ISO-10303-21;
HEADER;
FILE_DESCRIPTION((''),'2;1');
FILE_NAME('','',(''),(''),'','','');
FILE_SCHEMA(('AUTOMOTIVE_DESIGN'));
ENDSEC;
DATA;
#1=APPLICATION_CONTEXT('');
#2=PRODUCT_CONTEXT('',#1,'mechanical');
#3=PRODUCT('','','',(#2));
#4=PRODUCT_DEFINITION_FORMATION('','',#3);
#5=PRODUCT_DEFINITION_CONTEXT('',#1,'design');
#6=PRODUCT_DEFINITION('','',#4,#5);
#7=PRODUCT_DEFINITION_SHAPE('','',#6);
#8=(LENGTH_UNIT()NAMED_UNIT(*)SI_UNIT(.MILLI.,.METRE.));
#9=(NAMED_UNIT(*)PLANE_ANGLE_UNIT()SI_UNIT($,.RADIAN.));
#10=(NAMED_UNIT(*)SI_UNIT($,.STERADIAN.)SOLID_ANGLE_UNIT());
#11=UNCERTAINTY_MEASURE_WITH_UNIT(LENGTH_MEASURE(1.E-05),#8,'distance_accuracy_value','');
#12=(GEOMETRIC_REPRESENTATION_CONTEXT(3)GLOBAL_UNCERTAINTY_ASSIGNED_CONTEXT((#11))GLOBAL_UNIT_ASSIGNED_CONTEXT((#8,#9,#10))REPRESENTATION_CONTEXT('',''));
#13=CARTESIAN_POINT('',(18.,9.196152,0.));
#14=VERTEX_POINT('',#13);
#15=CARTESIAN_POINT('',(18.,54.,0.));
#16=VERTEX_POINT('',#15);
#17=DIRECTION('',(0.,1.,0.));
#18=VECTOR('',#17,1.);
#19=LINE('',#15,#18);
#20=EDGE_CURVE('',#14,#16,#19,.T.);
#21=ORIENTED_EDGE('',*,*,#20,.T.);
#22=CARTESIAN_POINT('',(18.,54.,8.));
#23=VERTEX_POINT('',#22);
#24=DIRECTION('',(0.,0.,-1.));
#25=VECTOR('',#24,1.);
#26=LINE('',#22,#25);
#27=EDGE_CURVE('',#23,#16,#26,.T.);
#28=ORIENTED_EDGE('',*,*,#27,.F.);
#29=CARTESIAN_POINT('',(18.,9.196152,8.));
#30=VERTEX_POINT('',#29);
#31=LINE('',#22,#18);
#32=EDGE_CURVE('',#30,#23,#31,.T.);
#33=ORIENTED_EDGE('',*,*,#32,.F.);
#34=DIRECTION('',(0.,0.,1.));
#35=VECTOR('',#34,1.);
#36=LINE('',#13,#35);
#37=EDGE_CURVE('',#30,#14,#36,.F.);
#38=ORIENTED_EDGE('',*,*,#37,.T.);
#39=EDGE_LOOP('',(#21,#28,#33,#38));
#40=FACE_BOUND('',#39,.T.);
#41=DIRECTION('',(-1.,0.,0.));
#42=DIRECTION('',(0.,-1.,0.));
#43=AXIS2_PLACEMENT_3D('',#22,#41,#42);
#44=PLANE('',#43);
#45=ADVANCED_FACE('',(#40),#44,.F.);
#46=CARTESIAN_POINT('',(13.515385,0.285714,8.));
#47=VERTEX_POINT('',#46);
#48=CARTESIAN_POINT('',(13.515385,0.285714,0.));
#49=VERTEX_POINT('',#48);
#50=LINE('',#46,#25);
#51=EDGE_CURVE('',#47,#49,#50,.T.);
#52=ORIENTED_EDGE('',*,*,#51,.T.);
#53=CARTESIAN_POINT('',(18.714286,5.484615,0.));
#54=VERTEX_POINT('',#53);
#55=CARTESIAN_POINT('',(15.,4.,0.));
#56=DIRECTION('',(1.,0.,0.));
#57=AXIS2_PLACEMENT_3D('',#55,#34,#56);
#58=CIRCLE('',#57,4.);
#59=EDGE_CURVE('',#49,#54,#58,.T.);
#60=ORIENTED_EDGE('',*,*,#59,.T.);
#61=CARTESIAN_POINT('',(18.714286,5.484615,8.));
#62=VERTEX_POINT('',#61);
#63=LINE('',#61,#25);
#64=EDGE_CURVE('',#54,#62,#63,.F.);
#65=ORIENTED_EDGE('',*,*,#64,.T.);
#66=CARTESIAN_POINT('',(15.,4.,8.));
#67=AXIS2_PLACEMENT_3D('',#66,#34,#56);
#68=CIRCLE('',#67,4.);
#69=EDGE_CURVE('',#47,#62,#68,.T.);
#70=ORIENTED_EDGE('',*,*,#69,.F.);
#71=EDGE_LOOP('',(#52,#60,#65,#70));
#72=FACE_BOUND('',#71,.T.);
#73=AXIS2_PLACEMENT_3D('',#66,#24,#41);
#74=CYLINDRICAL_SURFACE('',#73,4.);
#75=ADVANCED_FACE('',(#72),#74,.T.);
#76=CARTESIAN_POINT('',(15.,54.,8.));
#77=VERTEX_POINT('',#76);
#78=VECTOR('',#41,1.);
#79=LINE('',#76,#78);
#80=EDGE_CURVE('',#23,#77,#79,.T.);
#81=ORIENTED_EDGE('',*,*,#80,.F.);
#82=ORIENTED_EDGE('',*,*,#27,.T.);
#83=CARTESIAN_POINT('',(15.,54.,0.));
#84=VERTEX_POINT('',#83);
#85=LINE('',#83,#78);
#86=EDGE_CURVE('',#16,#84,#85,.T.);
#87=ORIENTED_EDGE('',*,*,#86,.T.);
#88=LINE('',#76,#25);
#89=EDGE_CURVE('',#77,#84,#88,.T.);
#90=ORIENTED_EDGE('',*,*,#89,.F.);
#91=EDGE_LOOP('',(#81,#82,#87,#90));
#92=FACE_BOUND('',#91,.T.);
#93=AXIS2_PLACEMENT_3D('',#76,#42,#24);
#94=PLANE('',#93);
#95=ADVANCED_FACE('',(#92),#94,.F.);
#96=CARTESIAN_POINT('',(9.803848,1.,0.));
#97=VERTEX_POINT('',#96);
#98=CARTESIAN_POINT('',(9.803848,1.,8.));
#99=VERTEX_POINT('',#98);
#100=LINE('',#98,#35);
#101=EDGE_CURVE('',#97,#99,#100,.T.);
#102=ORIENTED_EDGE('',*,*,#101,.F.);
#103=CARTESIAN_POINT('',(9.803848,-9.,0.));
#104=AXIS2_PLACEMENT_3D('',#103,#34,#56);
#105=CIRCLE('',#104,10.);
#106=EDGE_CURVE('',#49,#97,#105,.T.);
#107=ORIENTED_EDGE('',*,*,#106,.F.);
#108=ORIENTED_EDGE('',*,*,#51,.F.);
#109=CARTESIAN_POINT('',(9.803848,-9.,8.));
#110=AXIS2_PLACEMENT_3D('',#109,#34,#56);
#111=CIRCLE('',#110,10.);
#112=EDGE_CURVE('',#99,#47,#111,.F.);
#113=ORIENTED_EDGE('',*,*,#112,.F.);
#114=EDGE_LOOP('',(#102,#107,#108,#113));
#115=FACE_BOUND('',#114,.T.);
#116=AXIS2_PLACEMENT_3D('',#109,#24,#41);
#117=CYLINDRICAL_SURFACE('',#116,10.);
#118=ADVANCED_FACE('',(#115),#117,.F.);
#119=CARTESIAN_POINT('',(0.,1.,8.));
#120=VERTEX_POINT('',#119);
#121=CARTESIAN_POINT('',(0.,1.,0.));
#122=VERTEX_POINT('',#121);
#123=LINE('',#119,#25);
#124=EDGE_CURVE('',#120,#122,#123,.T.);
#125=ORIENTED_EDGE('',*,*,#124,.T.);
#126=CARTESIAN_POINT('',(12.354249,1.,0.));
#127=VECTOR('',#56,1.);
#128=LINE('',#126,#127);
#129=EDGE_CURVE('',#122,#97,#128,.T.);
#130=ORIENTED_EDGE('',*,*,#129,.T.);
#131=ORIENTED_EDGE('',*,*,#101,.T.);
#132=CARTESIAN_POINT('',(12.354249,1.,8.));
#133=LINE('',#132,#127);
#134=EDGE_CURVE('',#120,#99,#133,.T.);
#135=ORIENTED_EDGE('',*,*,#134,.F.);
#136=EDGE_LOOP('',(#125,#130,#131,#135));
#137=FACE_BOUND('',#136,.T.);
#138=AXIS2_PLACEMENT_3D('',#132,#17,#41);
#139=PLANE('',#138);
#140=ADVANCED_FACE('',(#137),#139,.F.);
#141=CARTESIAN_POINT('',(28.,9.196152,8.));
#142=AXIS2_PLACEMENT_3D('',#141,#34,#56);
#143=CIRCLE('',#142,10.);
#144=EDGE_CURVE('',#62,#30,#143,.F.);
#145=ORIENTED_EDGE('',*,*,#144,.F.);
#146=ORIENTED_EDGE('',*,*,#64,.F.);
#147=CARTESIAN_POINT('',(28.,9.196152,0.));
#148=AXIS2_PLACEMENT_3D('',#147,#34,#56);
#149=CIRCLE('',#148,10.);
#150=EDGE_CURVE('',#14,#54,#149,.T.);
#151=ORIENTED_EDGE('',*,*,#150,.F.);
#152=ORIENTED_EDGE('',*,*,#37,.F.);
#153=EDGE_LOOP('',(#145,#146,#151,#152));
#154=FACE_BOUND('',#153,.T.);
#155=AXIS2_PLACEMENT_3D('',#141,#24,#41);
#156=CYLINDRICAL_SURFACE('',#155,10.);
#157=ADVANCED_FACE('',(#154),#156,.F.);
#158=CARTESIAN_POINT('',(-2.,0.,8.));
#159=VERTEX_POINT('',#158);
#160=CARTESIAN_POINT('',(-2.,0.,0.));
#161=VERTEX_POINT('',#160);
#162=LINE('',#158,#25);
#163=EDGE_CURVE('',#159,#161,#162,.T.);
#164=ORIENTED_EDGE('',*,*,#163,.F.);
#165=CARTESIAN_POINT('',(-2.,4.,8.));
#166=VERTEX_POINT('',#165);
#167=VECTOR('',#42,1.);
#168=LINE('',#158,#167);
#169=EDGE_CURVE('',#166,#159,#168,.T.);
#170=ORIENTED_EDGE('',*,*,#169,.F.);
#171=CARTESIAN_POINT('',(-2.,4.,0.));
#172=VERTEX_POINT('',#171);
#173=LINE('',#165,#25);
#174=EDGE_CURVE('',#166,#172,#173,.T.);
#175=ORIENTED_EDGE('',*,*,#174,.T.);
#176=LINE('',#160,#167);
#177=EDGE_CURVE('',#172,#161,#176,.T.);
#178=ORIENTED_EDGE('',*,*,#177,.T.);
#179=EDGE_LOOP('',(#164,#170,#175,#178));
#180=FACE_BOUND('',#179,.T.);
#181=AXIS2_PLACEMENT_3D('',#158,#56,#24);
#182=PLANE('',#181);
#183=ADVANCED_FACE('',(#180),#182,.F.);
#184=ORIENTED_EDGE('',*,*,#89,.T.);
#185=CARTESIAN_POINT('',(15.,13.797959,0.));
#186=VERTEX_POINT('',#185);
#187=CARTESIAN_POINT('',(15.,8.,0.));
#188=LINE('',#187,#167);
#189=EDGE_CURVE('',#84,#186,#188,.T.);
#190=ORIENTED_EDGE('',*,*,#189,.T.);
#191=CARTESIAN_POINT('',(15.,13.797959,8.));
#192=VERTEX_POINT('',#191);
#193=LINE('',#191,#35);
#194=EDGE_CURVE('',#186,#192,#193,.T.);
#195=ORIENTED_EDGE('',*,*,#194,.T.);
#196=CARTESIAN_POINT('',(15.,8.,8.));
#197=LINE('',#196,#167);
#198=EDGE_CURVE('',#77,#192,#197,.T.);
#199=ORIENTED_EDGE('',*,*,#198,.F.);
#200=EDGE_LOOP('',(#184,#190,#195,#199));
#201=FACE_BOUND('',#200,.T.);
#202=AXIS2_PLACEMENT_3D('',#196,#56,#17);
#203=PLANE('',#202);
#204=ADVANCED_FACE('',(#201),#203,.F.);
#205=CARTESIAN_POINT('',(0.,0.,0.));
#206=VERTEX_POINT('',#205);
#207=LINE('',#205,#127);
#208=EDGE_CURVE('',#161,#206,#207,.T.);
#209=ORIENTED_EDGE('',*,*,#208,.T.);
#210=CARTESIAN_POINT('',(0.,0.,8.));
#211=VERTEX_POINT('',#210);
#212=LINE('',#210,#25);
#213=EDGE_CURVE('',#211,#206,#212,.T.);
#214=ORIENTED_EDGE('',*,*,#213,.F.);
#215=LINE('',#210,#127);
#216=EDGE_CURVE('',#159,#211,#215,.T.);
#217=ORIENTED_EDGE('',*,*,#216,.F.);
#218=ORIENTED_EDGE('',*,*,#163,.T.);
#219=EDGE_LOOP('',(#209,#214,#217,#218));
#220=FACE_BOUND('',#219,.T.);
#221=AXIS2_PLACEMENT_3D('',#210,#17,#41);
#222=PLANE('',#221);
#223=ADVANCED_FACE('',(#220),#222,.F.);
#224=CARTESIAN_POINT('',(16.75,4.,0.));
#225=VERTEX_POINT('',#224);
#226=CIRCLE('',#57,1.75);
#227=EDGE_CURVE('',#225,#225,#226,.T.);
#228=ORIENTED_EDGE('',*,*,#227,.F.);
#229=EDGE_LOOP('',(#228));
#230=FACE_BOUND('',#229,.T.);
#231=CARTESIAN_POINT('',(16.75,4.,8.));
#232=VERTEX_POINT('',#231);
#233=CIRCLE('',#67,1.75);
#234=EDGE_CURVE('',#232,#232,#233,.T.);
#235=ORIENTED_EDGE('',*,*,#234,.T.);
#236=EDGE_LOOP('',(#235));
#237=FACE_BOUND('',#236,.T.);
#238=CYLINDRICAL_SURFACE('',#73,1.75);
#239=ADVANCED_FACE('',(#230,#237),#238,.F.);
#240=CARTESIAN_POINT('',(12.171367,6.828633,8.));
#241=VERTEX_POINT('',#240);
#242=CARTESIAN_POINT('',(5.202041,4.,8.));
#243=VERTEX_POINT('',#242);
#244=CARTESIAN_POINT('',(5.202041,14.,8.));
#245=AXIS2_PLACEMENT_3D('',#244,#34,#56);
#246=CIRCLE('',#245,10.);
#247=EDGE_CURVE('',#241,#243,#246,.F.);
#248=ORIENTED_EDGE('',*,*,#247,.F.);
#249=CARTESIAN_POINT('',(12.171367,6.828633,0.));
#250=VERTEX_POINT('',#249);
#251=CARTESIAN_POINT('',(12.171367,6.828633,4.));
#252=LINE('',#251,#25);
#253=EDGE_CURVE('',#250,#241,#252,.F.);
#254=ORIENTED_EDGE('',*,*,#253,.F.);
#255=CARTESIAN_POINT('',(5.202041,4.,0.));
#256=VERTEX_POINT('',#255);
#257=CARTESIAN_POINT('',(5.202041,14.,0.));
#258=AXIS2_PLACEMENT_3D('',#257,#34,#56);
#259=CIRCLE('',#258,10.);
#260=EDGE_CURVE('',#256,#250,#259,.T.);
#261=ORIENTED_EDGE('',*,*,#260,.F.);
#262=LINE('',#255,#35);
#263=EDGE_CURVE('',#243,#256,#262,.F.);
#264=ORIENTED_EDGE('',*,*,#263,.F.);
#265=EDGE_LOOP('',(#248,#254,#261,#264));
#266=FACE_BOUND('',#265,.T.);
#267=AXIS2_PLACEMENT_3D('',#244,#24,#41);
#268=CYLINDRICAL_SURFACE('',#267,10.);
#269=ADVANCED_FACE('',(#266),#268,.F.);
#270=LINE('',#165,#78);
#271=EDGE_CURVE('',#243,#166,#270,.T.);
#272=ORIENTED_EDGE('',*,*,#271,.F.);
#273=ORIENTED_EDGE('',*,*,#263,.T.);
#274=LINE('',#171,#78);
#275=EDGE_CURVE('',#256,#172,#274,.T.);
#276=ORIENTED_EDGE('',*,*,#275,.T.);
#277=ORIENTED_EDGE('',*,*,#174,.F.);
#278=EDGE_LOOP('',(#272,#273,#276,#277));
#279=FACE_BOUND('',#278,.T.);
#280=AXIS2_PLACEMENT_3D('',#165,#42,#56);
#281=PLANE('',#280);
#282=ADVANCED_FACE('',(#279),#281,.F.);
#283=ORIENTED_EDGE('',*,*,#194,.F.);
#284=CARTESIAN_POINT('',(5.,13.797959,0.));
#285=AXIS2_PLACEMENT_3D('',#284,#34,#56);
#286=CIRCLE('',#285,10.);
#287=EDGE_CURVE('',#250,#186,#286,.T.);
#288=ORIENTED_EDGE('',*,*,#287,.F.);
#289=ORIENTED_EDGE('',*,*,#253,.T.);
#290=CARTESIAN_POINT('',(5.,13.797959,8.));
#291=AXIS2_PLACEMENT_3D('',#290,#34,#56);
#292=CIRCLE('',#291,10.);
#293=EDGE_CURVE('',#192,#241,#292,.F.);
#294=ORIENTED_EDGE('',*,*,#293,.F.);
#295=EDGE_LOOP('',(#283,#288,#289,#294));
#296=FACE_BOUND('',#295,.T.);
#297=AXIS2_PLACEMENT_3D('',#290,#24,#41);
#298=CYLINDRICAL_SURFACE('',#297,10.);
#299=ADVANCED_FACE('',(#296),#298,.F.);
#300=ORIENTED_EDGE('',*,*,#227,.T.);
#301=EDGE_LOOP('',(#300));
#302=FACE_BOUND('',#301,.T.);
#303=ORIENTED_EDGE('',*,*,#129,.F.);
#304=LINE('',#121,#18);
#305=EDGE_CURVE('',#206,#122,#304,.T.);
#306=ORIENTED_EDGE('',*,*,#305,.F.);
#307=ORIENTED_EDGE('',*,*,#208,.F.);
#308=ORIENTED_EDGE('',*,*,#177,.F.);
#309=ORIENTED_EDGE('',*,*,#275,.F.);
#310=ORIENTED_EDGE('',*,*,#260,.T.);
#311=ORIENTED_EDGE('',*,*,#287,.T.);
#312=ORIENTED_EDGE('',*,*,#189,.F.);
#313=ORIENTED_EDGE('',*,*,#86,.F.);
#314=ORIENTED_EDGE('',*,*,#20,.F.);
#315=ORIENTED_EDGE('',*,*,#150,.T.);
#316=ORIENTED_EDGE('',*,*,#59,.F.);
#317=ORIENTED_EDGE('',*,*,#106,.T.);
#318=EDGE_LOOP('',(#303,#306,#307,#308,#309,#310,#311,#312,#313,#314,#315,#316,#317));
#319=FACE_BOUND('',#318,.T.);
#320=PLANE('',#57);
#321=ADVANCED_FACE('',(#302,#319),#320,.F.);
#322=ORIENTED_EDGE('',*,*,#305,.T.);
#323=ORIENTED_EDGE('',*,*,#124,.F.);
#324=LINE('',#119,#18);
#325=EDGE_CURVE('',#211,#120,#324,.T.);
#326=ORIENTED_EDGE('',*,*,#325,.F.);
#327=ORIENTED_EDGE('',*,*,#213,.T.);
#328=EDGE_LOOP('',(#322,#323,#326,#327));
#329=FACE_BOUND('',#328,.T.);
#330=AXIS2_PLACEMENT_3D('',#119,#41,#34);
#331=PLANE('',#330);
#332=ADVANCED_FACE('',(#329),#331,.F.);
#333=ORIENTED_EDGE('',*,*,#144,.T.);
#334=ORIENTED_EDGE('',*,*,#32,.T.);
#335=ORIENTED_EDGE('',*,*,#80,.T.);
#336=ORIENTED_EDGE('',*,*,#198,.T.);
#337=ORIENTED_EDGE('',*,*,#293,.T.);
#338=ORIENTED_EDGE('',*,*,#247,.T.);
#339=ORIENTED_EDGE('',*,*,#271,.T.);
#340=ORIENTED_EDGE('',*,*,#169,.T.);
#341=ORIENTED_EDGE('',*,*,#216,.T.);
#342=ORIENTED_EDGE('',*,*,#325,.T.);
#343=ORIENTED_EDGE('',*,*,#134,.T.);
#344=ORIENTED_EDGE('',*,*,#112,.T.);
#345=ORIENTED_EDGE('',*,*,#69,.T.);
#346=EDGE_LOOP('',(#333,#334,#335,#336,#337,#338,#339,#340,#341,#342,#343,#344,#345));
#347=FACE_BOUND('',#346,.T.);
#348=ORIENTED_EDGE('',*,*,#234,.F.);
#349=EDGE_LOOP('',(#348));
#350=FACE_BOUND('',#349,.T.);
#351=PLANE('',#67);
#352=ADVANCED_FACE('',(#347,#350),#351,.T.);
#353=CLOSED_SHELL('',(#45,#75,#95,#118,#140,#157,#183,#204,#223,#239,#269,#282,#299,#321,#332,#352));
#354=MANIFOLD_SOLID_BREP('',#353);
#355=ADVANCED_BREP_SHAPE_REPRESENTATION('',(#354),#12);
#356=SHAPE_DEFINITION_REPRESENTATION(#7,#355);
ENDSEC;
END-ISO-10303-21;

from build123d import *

# Parameters (mm, degrees)
SKETCH1_R           = 1.75
BOSS_EXTRUDE1_DEPTH = 8
FILLET1_R           = 10


with BuildPart() as part:
    # Sketch1 → Boss-Extrude1 (new body)
    with BuildSketch(Plane.XY):
        with BuildLine():
            Line((0, 0), (-2, 0))
            Line((-2, 0), (-2, 4))
            Line((-2, 4), (11, 4))
            ThreePointArc((11, 4), (12.171572875, 6.828427125), (15, 8))
            Line((15, 8), (15, 54))
            Line((15, 54), (18, 54))
            Line((18, 54), (18, 6.645751311))
            ThreePointArc((18, 6.645751311), (17.828427125, 1.171572875), (12.354248689, 1))
            Line((12.354248689, 1), (0, 1))
            Line((0, 1), (0, 0))
        make_face()
        with Locations((15, 4)):
            Circle(SKETCH1_R, mode=Mode.SUBTRACT)
    extrude(amount=BOSS_EXTRUDE1_DEPTH)

    # Fillet1
    # the kernel refuses this fillet: 10 mm, written as the material it adds along each edge
    with BuildSketch(Plane(origin=(11, 4, 0), x_dir=(-1, 0, 0), z_dir=(0, 0, 1))) as fillet1_piece_1:
        with BuildLine():
            CenterArc((5.797958971, -10), FILLET1_R, 90, 44.415308597)
            ThreePointArc((-1.200583151, -2.857142857), (-0.31234035, -1.549569715), (0, 0))
            Line((0, 0), (5.797958971, 0))
        make_face()
    extrude(amount=8)
    with BuildSketch(Plane(origin=(15, 8, 0), x_dir=(-0.9219149126204016, -0.3873924287955524, 0), z_dir=(0, 0, 1))) as fillet1_piece_2:
        with BuildLine():
            CenterArc((6.973063718, -9.219149126), FILLET1_R, 112.792345701, 44.415308597)
            Line((-2.246085408, -5.345224838), (0, 0))
            ThreePointArc((0, 0), (1.549569715, -0.31234035), (3.09913943, 0))
        make_face()
    extrude(amount=8)
    with BuildSketch(Plane(origin=(18, 6.645751311, 0), x_dir=(0, 1, 0), z_dir=(0, 0, 1))) as fillet1_piece_3:
        with BuildLine():
            CenterArc((2.550401112, -10), FILLET1_R, 90, 21.786789298)
            ThreePointArc((-1.161136333, -0.714285714), (-0.54991438, -0.406973372), (0, 0))
            Line((0, 0), (2.550401112, 0))
        make_face()
    extrude(amount=8)
    with BuildSketch(Plane(origin=(12.354248689, 1, 0), x_dir=(-1, 0, 0), z_dir=(0, 0, 1))) as fillet1_piece_4:
        with BuildLine():
            CenterArc((2.550401112, 10), FILLET1_R, 248.213210702, 21.786789298)
            ThreePointArc((-1.161136333, 0.714285714), (-0.54991438, 0.406973372), (0, 0))
            Line((0, 0), (2.550401112, 0))
        make_face()
    extrude(amount=8)


solid = part.part
